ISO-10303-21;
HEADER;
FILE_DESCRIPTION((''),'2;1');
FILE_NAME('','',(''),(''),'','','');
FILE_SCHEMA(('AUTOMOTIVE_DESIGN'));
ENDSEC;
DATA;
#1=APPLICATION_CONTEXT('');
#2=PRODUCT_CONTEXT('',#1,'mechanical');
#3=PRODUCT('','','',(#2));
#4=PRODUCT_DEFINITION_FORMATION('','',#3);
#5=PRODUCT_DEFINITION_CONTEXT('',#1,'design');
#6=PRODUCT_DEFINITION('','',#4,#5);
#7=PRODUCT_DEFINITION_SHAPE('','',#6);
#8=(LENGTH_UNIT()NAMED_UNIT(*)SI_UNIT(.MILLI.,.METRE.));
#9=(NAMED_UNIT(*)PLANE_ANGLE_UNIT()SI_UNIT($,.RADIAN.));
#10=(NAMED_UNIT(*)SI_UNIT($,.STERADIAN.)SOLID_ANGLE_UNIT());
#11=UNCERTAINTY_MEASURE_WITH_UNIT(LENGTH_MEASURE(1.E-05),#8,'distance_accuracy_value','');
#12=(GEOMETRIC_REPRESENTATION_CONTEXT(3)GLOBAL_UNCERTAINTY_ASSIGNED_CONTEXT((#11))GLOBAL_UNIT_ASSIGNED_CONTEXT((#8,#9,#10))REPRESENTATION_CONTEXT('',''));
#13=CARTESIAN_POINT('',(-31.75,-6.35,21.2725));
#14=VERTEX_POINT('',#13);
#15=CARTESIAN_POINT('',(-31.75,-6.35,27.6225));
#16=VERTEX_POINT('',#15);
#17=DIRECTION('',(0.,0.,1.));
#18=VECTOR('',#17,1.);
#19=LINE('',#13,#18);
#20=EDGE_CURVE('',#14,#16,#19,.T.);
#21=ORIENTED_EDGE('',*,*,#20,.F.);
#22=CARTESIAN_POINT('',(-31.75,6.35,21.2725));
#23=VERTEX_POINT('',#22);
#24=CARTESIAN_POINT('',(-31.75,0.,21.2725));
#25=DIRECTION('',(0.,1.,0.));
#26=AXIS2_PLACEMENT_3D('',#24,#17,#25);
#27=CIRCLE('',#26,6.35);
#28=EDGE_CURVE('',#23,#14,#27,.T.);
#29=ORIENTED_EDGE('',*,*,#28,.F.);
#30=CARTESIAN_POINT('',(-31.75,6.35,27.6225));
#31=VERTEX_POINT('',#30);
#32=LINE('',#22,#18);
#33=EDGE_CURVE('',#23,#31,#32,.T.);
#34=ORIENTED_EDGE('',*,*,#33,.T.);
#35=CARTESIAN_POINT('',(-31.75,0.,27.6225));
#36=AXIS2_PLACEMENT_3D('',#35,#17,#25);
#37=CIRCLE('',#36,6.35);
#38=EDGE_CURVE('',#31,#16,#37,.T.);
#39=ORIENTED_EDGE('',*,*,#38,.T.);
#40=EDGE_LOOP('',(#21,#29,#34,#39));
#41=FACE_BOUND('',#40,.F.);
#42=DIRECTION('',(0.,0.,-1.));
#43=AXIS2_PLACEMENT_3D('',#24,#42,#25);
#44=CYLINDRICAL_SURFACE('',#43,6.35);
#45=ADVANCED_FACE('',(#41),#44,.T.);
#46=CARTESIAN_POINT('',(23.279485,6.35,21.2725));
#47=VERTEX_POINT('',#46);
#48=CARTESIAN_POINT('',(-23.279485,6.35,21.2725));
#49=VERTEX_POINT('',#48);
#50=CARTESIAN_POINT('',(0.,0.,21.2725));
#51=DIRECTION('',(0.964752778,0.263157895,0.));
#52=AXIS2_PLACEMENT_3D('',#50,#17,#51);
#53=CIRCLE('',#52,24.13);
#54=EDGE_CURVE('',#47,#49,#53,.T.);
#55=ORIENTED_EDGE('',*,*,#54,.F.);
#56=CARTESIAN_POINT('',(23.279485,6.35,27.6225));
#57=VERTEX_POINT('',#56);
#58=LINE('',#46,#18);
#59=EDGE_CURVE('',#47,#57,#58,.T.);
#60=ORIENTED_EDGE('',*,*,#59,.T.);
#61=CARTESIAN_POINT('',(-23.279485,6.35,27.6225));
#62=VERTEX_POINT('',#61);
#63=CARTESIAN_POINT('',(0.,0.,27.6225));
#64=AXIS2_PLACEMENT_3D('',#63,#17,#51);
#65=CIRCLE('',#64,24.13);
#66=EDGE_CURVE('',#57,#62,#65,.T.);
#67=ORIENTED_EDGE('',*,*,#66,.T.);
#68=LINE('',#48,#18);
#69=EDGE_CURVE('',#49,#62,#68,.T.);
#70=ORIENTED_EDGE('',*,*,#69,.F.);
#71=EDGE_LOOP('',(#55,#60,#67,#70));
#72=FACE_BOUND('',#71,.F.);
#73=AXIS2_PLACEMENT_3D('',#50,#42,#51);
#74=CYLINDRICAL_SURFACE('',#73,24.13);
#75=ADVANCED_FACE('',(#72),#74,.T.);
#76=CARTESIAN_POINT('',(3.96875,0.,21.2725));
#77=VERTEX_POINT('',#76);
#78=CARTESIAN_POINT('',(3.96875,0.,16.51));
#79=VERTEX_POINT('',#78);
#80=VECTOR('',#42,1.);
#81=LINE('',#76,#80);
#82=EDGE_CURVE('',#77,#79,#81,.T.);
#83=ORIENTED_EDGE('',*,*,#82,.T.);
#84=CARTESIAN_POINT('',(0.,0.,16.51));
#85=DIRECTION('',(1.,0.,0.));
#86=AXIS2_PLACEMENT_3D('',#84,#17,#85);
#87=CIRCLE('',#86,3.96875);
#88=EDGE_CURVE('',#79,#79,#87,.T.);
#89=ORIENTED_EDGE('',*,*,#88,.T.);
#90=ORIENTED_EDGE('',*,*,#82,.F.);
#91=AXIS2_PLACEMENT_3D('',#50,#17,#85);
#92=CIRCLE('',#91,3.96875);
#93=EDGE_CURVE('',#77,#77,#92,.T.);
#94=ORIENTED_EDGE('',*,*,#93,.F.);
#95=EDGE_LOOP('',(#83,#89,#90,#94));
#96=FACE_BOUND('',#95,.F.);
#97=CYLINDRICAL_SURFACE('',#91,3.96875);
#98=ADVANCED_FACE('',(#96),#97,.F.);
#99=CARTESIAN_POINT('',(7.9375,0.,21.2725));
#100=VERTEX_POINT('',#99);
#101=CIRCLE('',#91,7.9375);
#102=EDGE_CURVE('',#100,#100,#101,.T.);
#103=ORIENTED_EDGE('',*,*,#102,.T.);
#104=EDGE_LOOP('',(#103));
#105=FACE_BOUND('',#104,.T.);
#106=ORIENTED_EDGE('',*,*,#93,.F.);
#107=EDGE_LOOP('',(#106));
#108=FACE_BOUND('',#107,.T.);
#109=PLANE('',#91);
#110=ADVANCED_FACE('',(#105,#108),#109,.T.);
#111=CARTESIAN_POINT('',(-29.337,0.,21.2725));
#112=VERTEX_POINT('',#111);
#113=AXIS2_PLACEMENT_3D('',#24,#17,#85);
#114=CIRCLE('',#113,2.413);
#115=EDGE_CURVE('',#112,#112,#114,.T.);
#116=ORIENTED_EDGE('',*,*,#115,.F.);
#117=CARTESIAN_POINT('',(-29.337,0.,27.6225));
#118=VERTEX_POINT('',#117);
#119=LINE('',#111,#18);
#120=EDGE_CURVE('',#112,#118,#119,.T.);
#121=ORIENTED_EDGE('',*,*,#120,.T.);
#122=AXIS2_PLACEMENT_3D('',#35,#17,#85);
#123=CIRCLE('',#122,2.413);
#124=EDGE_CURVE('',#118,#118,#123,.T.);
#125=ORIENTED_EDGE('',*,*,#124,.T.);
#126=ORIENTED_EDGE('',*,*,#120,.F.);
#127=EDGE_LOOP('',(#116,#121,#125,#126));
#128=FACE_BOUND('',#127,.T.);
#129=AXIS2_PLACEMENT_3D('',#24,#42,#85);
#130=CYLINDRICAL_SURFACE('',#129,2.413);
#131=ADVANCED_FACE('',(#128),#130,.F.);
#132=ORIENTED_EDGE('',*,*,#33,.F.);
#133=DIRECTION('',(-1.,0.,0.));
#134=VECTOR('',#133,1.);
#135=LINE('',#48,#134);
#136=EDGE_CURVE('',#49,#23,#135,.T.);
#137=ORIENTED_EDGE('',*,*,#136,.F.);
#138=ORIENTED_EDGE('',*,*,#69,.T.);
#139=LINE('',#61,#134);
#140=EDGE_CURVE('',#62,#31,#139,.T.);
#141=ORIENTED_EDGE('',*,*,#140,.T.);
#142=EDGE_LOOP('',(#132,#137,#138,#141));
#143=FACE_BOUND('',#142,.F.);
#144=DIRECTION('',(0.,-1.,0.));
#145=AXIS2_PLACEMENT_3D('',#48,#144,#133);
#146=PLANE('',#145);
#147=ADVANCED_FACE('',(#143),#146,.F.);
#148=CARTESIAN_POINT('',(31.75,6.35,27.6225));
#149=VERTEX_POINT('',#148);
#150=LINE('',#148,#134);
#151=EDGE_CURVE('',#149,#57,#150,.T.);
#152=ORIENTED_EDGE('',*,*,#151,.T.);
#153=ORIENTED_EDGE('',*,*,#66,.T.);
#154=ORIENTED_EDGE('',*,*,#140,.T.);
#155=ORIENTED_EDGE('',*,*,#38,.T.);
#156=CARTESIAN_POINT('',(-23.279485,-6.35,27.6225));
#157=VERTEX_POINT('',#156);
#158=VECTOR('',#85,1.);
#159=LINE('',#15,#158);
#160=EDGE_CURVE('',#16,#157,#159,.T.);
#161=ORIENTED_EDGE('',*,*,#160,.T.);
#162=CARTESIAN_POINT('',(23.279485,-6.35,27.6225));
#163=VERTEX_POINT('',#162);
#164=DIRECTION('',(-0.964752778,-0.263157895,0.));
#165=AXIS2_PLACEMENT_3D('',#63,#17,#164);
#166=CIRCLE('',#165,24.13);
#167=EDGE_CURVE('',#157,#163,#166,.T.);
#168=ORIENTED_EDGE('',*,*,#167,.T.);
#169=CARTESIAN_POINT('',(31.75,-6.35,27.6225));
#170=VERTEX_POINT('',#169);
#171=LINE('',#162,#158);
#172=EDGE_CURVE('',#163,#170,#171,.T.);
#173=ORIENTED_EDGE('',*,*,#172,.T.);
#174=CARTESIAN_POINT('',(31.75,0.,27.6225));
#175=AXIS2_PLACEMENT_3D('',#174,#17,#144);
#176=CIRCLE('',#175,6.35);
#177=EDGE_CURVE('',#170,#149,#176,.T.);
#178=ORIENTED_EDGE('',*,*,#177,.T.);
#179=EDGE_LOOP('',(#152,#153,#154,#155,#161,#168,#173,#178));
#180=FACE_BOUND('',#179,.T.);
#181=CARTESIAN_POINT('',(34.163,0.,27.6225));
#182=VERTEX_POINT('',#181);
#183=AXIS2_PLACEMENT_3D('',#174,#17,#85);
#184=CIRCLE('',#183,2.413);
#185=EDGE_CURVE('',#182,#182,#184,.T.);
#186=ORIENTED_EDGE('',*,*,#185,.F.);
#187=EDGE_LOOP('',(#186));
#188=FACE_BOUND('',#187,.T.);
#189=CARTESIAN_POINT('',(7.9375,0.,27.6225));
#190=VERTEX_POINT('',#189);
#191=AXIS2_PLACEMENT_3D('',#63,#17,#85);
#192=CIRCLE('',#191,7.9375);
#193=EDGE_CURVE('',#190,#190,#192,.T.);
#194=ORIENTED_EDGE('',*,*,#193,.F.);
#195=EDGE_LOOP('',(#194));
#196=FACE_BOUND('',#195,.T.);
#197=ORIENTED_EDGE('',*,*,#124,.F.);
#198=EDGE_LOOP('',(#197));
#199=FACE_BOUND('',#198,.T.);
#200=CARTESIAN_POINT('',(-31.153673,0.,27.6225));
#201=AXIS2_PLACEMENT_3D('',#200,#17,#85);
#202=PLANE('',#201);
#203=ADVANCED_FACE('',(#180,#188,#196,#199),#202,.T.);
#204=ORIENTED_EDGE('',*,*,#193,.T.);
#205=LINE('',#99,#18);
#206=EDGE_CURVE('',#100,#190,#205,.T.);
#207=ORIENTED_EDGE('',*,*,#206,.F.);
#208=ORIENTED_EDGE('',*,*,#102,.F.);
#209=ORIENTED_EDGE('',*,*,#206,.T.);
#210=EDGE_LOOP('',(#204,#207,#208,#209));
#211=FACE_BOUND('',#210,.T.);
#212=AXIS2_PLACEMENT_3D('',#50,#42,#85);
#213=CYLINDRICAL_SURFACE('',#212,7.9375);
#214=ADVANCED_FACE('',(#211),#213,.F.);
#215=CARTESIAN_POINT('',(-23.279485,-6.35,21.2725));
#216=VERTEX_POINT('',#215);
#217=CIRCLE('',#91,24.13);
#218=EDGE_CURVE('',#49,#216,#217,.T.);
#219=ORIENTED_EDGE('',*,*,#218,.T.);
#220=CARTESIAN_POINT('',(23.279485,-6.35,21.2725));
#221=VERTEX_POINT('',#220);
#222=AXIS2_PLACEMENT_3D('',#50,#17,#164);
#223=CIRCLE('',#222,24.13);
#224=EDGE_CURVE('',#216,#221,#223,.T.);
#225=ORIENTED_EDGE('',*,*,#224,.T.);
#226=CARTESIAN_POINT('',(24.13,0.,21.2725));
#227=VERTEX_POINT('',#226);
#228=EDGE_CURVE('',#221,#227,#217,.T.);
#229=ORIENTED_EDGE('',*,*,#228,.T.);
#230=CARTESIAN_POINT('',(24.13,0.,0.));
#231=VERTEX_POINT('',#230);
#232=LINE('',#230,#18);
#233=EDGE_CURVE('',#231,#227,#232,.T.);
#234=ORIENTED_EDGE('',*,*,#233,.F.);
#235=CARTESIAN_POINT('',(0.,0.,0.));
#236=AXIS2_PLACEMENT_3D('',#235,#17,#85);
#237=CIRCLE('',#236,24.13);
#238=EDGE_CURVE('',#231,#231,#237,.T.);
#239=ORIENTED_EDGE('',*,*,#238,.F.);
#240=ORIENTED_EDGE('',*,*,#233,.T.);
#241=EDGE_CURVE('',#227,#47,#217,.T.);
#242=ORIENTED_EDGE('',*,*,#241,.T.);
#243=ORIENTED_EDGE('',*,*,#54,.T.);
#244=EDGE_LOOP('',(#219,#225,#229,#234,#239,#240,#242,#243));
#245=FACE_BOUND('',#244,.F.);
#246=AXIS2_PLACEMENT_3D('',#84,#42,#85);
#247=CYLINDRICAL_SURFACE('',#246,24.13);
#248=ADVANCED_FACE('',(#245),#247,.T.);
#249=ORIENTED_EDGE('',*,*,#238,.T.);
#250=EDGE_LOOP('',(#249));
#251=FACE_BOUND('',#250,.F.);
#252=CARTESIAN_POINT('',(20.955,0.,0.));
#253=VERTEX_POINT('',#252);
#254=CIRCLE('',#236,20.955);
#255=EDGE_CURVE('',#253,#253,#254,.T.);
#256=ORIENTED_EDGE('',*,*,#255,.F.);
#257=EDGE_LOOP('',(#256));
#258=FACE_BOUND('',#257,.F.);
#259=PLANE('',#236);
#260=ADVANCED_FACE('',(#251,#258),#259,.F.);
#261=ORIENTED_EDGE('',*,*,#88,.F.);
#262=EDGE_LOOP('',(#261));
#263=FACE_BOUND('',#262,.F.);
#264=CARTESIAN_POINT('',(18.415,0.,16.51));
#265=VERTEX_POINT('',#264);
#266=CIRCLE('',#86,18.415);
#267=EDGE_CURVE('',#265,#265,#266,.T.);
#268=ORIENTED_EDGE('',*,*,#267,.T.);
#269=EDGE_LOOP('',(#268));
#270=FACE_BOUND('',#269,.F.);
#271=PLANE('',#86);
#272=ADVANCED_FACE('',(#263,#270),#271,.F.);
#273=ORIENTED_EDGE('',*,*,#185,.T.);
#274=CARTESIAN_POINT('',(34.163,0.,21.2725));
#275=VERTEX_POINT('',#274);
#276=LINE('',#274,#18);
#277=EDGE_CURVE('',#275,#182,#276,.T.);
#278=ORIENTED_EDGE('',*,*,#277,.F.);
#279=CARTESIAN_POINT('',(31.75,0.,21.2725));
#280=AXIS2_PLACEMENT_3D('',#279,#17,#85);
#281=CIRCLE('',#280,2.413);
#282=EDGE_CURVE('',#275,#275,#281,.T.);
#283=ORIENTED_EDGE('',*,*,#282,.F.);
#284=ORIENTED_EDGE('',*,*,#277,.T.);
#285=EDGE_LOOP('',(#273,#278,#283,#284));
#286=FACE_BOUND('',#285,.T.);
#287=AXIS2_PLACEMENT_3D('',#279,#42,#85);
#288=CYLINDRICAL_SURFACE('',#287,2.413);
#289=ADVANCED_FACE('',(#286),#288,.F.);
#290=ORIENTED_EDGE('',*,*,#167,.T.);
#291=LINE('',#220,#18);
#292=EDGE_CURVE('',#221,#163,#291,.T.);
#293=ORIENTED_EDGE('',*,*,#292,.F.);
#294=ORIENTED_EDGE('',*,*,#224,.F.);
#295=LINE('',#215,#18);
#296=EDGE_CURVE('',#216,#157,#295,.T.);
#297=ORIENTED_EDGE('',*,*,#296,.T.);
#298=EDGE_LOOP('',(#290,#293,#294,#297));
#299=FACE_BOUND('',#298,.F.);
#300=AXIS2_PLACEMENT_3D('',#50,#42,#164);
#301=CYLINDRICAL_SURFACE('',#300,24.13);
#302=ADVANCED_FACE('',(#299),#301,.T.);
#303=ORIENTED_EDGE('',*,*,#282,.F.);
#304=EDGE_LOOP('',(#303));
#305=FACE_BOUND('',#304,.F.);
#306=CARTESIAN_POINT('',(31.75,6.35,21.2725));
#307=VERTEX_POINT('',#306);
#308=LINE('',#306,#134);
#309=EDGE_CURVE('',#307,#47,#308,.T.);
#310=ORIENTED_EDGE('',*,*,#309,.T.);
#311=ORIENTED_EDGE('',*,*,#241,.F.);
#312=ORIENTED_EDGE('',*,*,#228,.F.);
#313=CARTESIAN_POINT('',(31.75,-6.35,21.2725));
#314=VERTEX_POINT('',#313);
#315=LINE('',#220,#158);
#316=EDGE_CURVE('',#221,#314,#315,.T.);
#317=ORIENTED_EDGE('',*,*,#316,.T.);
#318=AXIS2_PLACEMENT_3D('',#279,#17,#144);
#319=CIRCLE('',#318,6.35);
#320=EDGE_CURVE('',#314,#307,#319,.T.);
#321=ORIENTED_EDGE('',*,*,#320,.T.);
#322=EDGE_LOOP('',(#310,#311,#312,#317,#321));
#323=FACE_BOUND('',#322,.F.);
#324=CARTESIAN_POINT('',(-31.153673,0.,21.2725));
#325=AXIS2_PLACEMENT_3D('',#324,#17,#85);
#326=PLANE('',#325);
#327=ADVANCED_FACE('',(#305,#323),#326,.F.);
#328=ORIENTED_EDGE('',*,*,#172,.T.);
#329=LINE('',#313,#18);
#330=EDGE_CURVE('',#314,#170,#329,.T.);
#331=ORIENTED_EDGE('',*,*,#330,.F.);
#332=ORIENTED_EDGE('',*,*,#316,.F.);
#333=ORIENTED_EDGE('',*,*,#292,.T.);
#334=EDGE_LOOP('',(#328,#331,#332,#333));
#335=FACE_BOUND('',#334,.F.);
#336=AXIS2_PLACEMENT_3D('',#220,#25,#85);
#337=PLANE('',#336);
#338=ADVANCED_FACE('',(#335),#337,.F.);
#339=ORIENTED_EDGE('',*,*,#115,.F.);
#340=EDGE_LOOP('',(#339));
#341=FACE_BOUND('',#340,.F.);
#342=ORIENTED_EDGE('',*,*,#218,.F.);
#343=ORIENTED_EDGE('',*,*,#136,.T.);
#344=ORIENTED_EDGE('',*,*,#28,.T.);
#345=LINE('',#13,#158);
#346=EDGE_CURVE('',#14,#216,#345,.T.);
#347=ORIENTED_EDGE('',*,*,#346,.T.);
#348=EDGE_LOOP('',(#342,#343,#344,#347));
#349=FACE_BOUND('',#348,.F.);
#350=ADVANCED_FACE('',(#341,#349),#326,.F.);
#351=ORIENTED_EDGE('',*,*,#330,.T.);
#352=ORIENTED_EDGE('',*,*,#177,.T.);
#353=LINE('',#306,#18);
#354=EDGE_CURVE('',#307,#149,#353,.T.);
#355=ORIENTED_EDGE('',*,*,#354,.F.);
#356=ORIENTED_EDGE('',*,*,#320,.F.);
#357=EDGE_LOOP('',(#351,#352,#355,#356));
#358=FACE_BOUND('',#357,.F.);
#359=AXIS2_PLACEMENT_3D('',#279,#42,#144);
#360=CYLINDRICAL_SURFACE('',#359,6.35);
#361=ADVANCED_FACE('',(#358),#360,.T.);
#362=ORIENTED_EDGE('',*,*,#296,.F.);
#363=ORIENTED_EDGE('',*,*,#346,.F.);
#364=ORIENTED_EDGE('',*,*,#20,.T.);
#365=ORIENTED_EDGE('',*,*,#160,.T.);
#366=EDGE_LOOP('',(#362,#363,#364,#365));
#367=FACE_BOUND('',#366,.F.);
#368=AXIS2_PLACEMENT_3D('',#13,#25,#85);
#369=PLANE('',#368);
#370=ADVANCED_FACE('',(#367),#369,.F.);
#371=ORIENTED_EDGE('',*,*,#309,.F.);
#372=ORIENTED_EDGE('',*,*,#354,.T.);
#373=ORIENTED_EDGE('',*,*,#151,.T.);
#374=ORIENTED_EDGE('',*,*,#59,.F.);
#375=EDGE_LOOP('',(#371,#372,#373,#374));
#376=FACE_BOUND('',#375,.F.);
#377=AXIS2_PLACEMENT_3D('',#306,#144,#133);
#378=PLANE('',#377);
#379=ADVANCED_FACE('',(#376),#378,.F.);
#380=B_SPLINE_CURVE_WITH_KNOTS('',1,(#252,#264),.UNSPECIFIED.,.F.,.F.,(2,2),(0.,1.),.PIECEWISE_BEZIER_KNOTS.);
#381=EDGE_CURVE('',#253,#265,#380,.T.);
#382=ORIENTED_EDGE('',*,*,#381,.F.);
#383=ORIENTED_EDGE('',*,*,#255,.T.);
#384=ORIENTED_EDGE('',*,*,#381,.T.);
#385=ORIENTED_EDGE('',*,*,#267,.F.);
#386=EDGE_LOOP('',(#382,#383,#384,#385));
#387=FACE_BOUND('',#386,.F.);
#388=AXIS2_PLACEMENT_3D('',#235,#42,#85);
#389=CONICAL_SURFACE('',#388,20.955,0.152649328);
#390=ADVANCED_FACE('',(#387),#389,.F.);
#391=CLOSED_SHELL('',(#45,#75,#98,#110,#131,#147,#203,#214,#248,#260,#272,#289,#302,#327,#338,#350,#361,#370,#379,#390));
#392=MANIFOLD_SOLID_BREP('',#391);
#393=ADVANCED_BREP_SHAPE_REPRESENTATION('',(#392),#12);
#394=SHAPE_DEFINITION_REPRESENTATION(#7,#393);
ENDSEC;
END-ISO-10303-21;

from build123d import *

# Parameters (mm, degrees)
F0_R     = 24.13
F0_R_2   = 20.955
F1_DEPTH = 16.51
F2_R     = 18.415
F2_R_2   = 24.13
F4_DEPTH = 4.7625
F5_R     = 3.96875
F6_DEPTH = 4.7625
F5_R_2   = 2.413
F5_R_3   = 7.9375
F7_DEPTH = 6.35


# Not quite as in the source:
# - a feature names something its author has since deleted; it is built from what else it names


with BuildPart() as f1:
    # F0 (on Top) → F1 (new body)
    with BuildSketch(Plane.XY):
        Circle(F0_R)
        Circle(F0_R_2, mode=Mode.SUBTRACT)
        Circle(F0_R_2)
    extrude(amount=F1_DEPTH)

    # F0 (on Top) → F3 section 0
    with BuildSketch(Plane.XY):
        Circle(F0_R_2)
    # F2 (on face) → F3 section 1
    with BuildSketch(Plane.XY.offset(16.51)):
        Circle(F2_R)
    loft(mode=Mode.SUBTRACT)

    # F2 (on face) → F4 (join)
    with BuildSketch(Plane.XY.offset(16.51)):
        Circle(F2_R_2)
        Circle(F2_R, mode=Mode.SUBTRACT)
        Circle(F2_R)
    extrude(amount=F4_DEPTH)

    # F5 (on face) → F6 (cut, through all)
    with BuildSketch(Plane.XY.offset(21.2725)):
        Circle(F5_R)
    extrude(amount=-F6_DEPTH, mode=Mode.SUBTRACT)

    # F5 (on face) → F7 (join)
    with BuildSketch(Plane.XY.offset(21.2725)):
        with BuildLine():
            Line((-26.2298047315, 6.35), (-31.75, 6.35))
            ThreePointArc((-31.75, 6.35), (-38.1, 0), (-31.75, -6.35))
            Line((-31.75, -6.35), (-26.2298047315, -6.35))
            ThreePointArc((-26.2298047315, -6.35), (-26.9875, 0), (-26.2298047315, 6.35))
        make_face()
        with Locations((-31.75, 0)):
            Circle(F5_R_2, mode=Mode.SUBTRACT)
        with BuildLine():
            ThreePointArc((23.2794845304, 6.35), (0, 24.13), (-23.2794845304, 6.35))
            ThreePointArc((-23.2794845304, 6.35), (-24.13, 0), (-23.2794845304, -6.35))
            ThreePointArc((-23.2794845304, -6.35), (0, -24.13), (23.2794845304, -6.35))
            ThreePointArc((23.2794845304, -6.35), (23.9164259633, -3.2033527968), (24.13, 0))
            ThreePointArc((24.13, 0), (23.9164259633, 3.2033527968), (23.2794845304, 6.35))
        make_face()
        Circle(F5_R_3, mode=Mode.SUBTRACT)
        with BuildLine():
            Line((31.75, 6.35), (26.2298047315, 6.35))
            ThreePointArc((26.2298047315, 6.35), (26.9875, 0), (26.2298047315, -6.35))
            Line((26.2298047315, -6.35), (31.75, -6.35))
            ThreePointArc((31.75, -6.35), (38.1, 0), (31.75, 6.35))
        make_face()
        with Locations((31.75, 0)):
            Circle(F5_R_2, mode=Mode.SUBTRACT)
        with BuildLine():
            Line((-23.2794845304, 6.35), (-26.2298047315, 6.35))
            ThreePointArc((-26.2298047315, 6.35), (-26.9875, 0), (-26.2298047315, -6.35))
            Line((-26.2298047315, -6.35), (-23.2794845304, -6.35))
            ThreePointArc((-23.2794845304, -6.35), (-24.13, 0), (-23.2794845304, 6.35))
        make_face()
        with BuildLine():
            Line((26.2298047315, 6.35), (23.2794845304, 6.35))
            ThreePointArc((23.2794845304, 6.35), (23.9164259633, 3.2033527968), (24.13, 0))
            ThreePointArc((24.13, 0), (23.9164259633, -3.2033527968), (23.2794845304, -6.35))
            Line((23.2794845304, -6.35), (26.2298047315, -6.35))
            ThreePointArc((26.2298047315, -6.35), (26.9875, 0), (26.2298047315, 6.35))
        make_face()
    extrude(amount=F7_DEPTH)


solid = f1.part
